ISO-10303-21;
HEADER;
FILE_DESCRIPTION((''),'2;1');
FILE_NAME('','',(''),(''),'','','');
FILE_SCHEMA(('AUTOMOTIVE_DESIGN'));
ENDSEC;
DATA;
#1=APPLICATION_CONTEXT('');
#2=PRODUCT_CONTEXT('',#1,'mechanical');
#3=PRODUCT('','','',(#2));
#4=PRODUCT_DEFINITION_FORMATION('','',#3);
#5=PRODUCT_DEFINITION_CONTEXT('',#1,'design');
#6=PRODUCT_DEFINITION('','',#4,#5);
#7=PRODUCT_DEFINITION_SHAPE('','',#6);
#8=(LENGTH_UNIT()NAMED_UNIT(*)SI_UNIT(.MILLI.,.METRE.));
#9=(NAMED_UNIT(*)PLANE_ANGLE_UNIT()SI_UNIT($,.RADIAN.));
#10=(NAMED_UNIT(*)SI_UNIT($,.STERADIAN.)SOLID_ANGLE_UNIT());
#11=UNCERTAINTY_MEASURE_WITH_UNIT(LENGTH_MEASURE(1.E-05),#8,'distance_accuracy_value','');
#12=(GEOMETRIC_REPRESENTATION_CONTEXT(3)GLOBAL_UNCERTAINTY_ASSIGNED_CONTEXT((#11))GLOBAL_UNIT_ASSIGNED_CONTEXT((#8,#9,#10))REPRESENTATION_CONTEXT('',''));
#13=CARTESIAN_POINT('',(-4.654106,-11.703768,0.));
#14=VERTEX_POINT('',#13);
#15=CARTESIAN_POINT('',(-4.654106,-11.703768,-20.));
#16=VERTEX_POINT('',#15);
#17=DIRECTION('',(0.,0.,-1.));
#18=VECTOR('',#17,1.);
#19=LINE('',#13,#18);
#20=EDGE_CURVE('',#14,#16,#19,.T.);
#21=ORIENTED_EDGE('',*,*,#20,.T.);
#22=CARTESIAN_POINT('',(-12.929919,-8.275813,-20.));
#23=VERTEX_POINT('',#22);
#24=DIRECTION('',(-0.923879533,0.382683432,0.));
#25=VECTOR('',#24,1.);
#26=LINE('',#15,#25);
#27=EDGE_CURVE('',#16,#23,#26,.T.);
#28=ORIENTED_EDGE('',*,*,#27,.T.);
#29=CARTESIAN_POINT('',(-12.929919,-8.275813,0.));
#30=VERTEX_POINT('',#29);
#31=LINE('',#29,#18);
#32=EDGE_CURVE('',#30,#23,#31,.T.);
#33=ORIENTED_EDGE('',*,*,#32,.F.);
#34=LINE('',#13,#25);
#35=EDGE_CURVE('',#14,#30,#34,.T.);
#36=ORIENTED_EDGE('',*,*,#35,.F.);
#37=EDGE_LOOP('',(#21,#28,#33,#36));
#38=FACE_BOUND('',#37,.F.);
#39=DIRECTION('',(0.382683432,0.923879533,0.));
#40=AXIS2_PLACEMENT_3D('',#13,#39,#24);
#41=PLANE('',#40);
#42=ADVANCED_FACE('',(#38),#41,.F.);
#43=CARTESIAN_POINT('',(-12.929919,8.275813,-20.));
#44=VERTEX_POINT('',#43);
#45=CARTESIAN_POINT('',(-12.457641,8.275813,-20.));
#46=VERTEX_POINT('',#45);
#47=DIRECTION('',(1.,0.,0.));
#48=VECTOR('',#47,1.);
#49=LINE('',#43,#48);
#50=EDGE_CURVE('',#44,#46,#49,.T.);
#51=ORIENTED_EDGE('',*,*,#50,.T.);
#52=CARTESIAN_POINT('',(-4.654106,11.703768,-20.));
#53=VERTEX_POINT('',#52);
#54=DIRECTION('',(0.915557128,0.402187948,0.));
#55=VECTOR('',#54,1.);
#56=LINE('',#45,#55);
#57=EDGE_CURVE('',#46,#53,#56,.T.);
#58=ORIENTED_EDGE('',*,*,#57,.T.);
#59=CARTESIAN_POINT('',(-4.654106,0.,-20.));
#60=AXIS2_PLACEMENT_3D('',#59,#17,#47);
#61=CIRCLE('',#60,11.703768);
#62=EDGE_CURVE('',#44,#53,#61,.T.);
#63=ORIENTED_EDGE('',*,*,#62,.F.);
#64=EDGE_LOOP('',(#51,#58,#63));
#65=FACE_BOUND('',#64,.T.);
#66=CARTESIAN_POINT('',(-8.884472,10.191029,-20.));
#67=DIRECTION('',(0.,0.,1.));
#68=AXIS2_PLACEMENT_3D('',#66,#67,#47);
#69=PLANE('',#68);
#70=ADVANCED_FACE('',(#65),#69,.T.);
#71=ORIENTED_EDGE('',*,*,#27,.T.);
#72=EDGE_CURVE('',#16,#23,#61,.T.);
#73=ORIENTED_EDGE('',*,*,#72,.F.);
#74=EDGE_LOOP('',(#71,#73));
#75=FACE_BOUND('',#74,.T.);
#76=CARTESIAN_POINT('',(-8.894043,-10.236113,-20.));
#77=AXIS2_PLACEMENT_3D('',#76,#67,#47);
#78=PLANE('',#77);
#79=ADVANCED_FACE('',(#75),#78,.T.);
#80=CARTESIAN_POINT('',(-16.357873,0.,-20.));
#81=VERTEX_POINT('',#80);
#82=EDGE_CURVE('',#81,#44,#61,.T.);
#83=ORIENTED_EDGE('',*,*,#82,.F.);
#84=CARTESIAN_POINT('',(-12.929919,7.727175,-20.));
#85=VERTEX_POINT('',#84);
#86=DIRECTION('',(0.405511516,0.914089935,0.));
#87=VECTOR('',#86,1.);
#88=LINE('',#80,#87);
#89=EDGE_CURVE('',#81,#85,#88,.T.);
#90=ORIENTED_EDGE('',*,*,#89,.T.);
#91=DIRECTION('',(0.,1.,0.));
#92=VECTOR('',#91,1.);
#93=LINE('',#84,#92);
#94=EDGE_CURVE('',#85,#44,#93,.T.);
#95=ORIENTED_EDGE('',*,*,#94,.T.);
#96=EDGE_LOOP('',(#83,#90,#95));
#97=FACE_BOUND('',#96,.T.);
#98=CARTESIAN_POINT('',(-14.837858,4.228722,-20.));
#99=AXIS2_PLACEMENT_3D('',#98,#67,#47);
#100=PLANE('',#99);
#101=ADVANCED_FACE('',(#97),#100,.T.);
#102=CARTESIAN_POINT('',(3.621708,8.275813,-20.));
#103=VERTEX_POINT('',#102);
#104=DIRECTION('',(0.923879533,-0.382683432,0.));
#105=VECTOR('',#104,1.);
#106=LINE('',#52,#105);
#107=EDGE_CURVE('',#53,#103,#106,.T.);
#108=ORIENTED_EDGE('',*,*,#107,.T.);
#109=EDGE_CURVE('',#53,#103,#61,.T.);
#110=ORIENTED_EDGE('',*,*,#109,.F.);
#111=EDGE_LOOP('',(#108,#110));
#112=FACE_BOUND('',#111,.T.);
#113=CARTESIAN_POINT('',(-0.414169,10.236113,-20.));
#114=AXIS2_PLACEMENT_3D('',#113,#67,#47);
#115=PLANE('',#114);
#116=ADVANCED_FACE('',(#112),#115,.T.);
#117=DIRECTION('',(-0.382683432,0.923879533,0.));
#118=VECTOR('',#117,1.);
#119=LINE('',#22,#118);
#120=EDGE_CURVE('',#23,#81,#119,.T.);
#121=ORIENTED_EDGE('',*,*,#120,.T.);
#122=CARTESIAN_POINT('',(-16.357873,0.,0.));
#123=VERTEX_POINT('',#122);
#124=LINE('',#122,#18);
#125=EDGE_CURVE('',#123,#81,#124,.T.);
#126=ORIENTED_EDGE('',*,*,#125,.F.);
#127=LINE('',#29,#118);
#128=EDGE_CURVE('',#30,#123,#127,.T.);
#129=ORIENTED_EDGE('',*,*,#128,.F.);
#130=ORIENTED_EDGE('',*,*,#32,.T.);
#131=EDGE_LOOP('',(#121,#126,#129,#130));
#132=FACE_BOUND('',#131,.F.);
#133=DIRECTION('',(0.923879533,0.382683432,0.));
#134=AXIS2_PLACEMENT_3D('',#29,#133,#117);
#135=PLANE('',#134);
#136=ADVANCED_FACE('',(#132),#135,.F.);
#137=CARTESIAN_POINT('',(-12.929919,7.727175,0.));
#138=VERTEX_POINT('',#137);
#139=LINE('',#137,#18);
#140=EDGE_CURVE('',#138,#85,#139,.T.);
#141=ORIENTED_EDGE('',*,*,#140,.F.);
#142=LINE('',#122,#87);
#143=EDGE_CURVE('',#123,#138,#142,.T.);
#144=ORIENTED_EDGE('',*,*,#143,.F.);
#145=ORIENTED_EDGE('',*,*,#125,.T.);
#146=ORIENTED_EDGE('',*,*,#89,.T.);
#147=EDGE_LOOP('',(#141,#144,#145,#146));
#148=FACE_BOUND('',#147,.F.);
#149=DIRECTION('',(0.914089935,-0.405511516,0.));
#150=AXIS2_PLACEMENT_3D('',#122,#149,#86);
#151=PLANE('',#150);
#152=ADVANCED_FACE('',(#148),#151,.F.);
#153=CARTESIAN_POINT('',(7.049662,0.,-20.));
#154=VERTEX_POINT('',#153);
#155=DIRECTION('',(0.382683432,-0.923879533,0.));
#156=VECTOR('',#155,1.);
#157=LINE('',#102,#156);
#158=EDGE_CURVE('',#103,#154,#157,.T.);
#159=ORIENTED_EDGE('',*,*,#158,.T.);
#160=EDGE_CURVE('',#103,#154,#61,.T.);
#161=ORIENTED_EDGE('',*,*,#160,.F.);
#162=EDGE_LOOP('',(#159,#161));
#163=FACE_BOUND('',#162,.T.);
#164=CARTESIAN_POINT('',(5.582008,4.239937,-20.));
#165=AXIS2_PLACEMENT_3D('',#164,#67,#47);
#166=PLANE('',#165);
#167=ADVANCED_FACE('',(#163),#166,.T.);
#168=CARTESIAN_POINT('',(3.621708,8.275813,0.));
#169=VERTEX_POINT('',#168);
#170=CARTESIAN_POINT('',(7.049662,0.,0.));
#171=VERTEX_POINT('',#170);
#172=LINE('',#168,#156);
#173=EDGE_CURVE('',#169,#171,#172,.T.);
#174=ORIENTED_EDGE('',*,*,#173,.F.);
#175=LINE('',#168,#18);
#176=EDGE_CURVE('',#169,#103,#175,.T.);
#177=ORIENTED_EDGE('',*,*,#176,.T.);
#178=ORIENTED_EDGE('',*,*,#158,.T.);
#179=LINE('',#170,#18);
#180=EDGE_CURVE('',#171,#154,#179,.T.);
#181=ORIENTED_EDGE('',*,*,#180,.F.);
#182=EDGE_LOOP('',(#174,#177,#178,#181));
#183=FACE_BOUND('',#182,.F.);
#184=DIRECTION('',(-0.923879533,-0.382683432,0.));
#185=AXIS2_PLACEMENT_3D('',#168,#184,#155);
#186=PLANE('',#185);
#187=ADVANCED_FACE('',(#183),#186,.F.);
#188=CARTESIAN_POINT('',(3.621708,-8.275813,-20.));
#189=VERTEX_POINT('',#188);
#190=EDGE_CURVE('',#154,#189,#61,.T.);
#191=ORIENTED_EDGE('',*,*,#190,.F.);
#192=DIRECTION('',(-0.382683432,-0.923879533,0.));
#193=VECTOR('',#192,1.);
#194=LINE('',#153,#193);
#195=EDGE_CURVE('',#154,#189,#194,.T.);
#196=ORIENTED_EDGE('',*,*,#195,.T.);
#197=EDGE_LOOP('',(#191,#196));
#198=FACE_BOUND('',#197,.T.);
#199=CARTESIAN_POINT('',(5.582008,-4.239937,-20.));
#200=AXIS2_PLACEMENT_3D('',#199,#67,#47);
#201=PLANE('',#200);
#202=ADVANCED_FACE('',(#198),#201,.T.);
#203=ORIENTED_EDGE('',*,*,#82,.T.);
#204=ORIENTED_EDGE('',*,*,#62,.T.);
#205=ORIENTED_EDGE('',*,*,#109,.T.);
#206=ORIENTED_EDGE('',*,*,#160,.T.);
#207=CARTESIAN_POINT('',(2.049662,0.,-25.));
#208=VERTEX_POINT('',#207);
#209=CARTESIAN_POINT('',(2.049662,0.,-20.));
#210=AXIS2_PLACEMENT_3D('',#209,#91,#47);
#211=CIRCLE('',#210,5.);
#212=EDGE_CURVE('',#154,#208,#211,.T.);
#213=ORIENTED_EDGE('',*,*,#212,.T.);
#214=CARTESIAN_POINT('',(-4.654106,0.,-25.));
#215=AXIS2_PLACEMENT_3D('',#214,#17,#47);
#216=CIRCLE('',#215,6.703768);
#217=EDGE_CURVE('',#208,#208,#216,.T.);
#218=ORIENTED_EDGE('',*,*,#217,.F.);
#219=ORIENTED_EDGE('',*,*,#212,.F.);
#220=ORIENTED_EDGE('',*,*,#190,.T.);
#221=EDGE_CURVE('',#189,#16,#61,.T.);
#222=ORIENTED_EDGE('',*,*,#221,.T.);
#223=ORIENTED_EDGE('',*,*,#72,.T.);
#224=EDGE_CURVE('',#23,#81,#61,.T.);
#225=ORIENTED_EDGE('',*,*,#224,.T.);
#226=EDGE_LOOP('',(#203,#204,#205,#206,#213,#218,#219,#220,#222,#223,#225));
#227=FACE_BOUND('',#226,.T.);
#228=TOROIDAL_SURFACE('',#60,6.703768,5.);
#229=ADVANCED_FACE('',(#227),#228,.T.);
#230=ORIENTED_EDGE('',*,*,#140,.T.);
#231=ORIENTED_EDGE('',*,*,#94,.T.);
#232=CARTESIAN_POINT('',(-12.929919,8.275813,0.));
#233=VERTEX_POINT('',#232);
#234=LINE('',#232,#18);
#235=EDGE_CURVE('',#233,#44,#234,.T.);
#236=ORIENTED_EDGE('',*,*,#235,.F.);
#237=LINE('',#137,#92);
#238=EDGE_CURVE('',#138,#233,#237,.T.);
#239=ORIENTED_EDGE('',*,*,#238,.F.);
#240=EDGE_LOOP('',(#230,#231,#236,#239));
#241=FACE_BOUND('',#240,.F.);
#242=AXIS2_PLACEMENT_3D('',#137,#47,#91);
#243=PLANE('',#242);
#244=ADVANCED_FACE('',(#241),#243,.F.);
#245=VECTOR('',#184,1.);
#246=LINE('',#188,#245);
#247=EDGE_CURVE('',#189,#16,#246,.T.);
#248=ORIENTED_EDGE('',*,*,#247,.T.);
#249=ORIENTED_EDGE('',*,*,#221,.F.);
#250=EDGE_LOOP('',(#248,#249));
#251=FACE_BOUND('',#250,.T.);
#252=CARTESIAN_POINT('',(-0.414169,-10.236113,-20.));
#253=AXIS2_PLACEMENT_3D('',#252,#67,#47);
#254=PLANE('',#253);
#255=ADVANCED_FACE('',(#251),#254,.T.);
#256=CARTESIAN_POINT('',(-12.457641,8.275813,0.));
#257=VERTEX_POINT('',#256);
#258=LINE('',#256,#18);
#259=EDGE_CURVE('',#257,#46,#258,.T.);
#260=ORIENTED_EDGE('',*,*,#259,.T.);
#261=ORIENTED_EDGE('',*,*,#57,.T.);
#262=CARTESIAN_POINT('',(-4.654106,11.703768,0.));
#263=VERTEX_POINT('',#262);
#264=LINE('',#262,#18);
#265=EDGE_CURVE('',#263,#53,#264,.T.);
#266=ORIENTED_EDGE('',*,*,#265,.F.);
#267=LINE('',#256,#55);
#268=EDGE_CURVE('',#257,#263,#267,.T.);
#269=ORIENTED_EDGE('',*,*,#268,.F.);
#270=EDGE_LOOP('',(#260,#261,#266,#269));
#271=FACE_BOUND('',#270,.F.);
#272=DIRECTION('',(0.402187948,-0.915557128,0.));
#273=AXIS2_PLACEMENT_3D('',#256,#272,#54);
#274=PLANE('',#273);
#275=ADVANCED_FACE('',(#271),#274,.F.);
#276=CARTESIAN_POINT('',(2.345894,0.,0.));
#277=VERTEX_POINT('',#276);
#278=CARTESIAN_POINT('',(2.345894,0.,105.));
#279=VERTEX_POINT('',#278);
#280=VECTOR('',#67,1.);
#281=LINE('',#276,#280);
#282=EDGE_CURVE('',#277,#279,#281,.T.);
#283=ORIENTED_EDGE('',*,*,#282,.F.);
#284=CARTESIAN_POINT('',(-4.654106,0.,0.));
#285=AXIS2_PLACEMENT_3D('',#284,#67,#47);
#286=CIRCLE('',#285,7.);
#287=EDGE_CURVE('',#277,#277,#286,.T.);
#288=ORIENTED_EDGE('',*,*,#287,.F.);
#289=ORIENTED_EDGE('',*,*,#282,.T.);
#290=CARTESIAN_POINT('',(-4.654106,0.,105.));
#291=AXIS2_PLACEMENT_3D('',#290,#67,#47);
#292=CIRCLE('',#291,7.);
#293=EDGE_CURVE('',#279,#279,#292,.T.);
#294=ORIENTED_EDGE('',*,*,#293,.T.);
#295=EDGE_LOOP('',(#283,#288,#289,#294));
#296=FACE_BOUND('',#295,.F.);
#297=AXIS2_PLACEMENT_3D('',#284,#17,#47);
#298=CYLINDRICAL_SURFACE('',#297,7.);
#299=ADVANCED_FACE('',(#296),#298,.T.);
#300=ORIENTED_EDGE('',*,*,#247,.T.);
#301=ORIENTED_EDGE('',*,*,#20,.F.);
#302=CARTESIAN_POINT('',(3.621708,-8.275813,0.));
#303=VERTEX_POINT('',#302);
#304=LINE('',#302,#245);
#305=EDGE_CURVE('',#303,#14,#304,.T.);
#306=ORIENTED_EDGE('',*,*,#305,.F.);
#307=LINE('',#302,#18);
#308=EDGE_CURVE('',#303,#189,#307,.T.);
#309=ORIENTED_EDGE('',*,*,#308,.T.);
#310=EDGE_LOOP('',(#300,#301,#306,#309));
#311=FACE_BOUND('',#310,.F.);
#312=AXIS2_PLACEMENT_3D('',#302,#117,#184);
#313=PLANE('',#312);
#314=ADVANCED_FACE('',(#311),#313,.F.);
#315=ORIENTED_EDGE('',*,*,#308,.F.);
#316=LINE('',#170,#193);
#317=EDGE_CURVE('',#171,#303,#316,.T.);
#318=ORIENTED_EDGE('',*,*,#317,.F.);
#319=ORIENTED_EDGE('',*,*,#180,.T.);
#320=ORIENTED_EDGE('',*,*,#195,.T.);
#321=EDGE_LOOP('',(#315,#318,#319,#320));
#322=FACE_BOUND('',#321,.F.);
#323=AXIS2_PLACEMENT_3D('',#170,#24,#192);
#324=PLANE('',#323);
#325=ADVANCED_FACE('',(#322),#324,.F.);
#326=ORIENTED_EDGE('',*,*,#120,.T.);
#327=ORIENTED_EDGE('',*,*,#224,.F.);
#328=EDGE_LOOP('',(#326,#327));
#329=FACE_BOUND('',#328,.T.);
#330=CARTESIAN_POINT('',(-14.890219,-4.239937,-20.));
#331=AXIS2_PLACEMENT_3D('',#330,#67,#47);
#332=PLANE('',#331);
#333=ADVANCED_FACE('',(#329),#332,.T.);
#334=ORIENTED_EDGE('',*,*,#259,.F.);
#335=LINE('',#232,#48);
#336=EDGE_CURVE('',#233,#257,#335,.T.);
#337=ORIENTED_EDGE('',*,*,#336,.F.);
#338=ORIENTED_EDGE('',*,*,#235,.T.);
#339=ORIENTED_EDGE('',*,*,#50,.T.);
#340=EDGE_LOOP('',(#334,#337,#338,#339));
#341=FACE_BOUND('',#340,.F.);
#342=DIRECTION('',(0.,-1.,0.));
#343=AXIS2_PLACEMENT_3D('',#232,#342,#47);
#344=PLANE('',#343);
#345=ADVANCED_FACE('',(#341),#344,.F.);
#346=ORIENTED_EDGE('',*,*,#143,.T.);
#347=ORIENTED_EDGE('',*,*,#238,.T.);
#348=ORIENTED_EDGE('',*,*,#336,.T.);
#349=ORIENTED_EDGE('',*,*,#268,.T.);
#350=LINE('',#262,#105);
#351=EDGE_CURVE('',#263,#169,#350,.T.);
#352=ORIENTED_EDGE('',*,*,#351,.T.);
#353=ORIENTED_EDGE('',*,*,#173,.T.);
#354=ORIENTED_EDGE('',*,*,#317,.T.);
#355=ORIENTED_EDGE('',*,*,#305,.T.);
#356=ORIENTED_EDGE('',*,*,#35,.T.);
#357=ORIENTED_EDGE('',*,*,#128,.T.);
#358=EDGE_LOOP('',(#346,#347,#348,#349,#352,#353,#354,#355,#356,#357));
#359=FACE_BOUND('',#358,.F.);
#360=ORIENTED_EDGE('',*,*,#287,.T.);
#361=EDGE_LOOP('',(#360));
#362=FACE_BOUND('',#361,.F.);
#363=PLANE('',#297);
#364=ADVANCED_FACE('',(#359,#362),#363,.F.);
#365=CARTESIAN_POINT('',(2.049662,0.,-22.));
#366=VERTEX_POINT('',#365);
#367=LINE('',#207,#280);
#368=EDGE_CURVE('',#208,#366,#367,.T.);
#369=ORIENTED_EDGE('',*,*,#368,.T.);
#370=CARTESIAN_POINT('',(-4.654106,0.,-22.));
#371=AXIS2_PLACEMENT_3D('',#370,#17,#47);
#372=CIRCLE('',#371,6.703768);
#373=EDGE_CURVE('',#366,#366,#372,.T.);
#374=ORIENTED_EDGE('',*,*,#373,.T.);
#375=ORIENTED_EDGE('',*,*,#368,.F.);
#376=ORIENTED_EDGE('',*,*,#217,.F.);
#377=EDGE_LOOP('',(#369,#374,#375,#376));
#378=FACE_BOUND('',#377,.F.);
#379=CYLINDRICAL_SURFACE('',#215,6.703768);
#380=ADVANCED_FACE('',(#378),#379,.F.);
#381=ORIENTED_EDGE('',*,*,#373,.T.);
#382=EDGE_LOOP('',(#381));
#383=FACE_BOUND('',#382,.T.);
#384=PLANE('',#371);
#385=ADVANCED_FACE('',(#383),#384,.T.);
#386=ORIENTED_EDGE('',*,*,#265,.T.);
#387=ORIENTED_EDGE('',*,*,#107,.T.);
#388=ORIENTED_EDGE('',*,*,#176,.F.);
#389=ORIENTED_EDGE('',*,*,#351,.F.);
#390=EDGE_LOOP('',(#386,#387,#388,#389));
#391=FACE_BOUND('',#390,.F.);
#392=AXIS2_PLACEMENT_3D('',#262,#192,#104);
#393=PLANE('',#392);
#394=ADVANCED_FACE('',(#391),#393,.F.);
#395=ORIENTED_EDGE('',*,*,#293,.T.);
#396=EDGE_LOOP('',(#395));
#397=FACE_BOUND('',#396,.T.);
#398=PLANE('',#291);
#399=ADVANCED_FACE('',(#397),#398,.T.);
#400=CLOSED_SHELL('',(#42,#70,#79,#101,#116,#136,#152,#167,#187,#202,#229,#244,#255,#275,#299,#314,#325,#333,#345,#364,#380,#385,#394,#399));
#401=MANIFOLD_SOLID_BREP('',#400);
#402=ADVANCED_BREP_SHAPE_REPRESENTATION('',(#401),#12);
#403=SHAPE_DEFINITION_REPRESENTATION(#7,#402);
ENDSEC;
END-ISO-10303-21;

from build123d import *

# Parameters (mm, degrees)
F0_R     = 7
F1_DEPTH = 105
F2_R     = 11.7037675531
F2_R_2   = 7
F3_DEPTH = 25
F4_R     = 5
F6_DEPTH = 20
F7_DEPTH = 3


with BuildPart() as f1:
    # F0 (on Top) → F1 (new body)
    with BuildSketch(Plane.XY):
        with Locations((-4.6541057527, 0)):
            Circle(F0_R)
    extrude(amount=F1_DEPTH)

    # F2 (on face) → F3 (join)
    with BuildSketch(Plane(origin=(0, 0, 0), x_dir=(1, 0, 0), z_dir=(0, 0, -1))):
        with Locations((-4.6541057527, 0)):
            Circle(F2_R)
        with Locations((-4.6541057527, 0)):
            Circle(F2_R_2, mode=Mode.SUBTRACT)
        with Locations((-4.6541057527, 0)):
            Circle(F2_R_2)
    extrude(amount=F3_DEPTH)

    # F4
    f4_edges = [f1.edges().sort_by_distance(p)[0] for p in [
        (-16.357873, 0, -25),
    ]]
    fillet(f4_edges, radius=F4_R)

    # F5 (on face) → F6 (cut)
    with BuildSketch(Plane.XY):
        with BuildLine():
            Line((-12.4576410745, 8.2758134023), (-4.6541057527, 11.7037675531))
            ThreePointArc((-4.6541057527, 11.7037675531), (-9.1329436915, 10.8128712956), (-12.929919155, 8.2758134023))
            Line((-12.929919155, 8.2758134023), (-12.4576410745, 8.2758134023))
        make_face()
        with BuildLine():
            ThreePointArc((-12.929919155, 8.2758134023), (-15.4669770483, 4.4788379388), (-16.3578733058, 0))
            Line((-16.3578733058, 0), (-12.929919155, 7.727174844))
            Line((-12.929919155, 7.727174844), (-12.929919155, 8.2758134023))
        make_face()
        with BuildLine():
            ThreePointArc((3.6217076495, 8.2758134023), (-0.1752678139, 10.8128712956), (-4.6541057527, 11.7037675531))
            Line((-4.6541057527, 11.7037675531), (3.6217076495, 8.2758134023))
        make_face()
        with BuildLine():
            Line((3.6217076495, 8.2758134023), (7.0496618004, 0))
            ThreePointArc((7.0496618004, 0), (6.1587655429, 4.4788379388), (3.6217076495, 8.2758134023))
        make_face()
        with BuildLine():
            ThreePointArc((3.6217076495, -8.2758134023), (6.1587655429, -4.4788379388), (7.0496618004, 0))
            Line((7.0496618004, 0), (3.6217076495, -8.2758134023))
        make_face()
        with BuildLine():
            Line((3.6217076495, -8.2758134023), (-4.6541057527, -11.7037675531))
            ThreePointArc((-4.6541057527, -11.7037675531), (-0.1752678139, -10.8128712956), (3.6217076495, -8.2758134023))
        make_face()
        with BuildLine():
            Line((-12.929919155, -8.2758134023), (-16.3578733058, 0))
            ThreePointArc((-16.3578733058, 0), (-15.4669770483, -4.4788379388), (-12.929919155, -8.2758134023))
        make_face()
        with BuildLine():
            ThreePointArc((-12.929919155, -8.2758134023), (-9.1329436915, -10.8128712956), (-4.6541057527, -11.7037675531))
            Line((-4.6541057527, -11.7037675531), (-12.929919155, -8.2758134023))
        make_face()
    extrude(amount=-F6_DEPTH, mode=Mode.SUBTRACT)

    # F7 (cut): a face of the model
    f7_faces = [f1.faces().sort_by_distance(p)[0] for p in [
        (-4.6541057527, 0, -25),
    ]]
    extrude(f7_faces, amount=-F7_DEPTH, mode=Mode.SUBTRACT)


solid = f1.part
